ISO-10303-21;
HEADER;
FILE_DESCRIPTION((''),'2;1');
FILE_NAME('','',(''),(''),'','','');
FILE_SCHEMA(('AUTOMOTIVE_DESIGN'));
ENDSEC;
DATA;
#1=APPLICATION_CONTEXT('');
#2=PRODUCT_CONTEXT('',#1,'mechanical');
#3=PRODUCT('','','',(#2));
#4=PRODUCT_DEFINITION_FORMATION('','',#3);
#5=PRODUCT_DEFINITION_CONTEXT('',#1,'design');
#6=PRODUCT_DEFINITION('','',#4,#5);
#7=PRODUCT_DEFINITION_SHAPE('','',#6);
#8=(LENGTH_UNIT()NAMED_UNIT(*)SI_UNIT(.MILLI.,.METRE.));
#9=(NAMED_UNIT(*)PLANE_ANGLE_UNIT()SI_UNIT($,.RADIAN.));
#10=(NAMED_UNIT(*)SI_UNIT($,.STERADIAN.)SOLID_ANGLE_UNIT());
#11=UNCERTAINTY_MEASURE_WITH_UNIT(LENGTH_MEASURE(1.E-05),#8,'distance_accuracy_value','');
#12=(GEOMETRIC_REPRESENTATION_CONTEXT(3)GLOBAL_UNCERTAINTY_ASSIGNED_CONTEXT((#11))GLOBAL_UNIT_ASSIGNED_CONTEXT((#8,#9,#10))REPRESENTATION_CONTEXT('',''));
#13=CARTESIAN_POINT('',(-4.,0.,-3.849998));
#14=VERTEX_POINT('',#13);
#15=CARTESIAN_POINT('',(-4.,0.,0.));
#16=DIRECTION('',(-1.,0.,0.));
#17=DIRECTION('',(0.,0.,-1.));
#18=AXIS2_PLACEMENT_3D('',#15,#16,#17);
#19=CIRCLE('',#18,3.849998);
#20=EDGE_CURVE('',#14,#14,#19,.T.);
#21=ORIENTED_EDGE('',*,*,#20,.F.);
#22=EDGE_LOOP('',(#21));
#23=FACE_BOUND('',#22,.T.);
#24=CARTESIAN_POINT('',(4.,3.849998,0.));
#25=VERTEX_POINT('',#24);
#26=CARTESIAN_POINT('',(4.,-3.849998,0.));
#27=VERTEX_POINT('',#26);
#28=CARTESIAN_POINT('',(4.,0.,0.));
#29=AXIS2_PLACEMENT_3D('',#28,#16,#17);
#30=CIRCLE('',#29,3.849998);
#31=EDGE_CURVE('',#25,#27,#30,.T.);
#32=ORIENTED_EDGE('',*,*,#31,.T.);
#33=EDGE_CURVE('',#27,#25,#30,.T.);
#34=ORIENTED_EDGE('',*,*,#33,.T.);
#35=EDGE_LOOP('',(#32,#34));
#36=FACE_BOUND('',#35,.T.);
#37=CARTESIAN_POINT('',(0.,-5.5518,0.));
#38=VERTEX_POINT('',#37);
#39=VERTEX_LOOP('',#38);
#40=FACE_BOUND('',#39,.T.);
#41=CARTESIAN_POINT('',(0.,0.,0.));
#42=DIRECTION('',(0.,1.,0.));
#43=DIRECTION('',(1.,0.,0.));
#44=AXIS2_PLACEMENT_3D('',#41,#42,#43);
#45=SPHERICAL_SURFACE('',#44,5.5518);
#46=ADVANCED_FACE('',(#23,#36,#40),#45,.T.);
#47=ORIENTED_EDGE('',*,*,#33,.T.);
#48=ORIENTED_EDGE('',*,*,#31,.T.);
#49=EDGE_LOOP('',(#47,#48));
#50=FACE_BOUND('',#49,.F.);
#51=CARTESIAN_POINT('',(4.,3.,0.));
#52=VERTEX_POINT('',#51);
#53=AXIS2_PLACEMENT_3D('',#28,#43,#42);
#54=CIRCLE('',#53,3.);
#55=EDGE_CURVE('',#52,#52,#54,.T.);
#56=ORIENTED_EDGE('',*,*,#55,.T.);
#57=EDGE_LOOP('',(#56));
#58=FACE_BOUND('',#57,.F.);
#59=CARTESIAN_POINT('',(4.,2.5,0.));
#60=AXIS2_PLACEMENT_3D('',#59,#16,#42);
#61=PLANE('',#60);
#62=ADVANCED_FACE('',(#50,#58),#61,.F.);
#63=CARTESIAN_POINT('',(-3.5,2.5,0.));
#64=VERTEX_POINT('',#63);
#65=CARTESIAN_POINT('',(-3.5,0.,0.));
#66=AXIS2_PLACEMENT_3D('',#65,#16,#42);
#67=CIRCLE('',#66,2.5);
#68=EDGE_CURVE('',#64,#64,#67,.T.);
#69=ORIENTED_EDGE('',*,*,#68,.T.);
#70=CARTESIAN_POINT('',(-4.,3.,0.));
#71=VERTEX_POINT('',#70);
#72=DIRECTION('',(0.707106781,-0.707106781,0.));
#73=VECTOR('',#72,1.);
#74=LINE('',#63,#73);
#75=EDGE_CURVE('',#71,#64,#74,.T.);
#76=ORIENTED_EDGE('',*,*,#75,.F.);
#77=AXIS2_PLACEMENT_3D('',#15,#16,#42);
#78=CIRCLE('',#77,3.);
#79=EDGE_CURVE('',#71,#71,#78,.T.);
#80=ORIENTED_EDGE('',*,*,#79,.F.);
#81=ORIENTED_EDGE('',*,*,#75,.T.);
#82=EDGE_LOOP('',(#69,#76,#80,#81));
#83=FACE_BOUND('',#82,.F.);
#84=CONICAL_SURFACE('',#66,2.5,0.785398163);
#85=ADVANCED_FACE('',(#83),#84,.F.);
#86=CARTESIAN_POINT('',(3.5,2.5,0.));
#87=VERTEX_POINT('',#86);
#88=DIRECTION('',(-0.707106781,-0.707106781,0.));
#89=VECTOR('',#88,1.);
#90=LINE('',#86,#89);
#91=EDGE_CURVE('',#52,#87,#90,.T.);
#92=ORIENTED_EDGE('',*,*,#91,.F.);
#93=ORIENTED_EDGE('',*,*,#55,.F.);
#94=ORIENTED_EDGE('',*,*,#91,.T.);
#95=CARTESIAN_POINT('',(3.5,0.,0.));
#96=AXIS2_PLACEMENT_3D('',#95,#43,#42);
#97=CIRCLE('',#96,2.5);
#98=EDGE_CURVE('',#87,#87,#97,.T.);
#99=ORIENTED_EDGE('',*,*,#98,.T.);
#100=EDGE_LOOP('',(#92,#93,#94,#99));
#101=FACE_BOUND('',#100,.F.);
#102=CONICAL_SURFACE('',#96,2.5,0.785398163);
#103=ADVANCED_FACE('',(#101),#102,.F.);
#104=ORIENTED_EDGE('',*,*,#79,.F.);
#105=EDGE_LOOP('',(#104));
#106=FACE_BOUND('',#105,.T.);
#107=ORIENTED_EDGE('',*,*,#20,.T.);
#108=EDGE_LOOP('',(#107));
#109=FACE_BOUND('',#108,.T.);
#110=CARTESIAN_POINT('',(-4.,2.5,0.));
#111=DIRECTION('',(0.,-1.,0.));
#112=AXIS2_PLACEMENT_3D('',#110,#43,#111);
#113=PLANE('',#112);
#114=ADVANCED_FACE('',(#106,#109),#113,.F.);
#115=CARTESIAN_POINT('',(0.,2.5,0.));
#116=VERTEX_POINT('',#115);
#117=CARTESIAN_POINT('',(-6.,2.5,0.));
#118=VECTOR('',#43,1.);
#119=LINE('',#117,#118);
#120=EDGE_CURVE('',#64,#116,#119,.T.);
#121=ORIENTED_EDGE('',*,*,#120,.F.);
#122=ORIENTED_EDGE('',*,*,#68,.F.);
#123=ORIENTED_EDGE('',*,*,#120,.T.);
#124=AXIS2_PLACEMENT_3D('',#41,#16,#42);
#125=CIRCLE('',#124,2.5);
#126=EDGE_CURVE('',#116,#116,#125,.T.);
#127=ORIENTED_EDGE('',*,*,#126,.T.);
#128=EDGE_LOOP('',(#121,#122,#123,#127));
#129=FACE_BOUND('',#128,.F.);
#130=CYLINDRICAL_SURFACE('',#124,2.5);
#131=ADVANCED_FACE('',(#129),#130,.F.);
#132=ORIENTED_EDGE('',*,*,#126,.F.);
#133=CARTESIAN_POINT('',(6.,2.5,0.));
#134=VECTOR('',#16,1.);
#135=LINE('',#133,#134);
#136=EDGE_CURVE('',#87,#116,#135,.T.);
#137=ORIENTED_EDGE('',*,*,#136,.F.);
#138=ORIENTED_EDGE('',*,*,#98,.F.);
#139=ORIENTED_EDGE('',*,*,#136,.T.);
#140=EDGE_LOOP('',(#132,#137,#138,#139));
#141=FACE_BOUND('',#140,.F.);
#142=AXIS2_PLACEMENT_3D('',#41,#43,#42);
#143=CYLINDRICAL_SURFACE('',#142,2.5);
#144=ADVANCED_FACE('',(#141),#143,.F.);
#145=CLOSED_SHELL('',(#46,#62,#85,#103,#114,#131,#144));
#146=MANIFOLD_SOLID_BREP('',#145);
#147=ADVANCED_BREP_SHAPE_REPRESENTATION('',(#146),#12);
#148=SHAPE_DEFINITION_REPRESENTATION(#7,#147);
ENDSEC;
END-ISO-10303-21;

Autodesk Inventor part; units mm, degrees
ref_plane "YZ Plane" through (0, 0, 0) normal (1, 0, 0) x (0, 1, 0)
ref_plane "XZ Plane" through (0, 0, 0) normal (0, 1, 0) x (-1, 0, 0)
ref_plane "XY Plane" through (0, 0, 0) normal (0, 0, 1) x (1, 0, 0)
sketch "Sketch1" plane through (0, 0, 0) normal (0, 0, 1) x (1, 0, 0)
  line L0 (0, 3.85) -> (0, -3.85)
  line L1 (0, -3.85) -> (4, -3.85)
  line L2 (4, -3.85) -> (4, 3.85)
  line L3 (4, 3.85) -> (0, 3.85)
  arc A0 (0, -5.5518) -> (0, 5.5518) centre (0, 0) ccw
  line L4 (0, 5.5518) -> (0, -5.5518)
  line L5 (4, 5.5518) -> (6, 5.5518)
  line L6 (6, 5.5518) -> (6, -5.5518)
  line L7 (6, -5.5518) -> (4, -5.5518)
  line L8 (4, -5.5518) -> (4, 5.5518)
  line L9 (0, 2.5) -> (6, 2.5)
  line L10 (6, 2.5) -> (6, 0)
  line L11 (6, 0) -> (0, 0)
  line L12 (0, 0) -> (0, 2.5)
  dimension "d0" = 7.7
  dimension "d2" = 4
  dimension "d3" = 3.85
  dimension "d4" = 2
  dimension "d5" = 2
  dimension "d6" = 6
  dimension "d7" = 6
  dimension "d8" = 2.5
  dimension "d9" = 2.5
revolve "Revolution1" add sketch "Sketch1" angle 360 about axis through (0, 5.5518, 0) along (0, -1, 0) contours L3 L2 L9 L0 | L4 A0 L3 | L9 L2 L11 L0 | A0 L9 L2 | L11 L2 L1 L0 | L9 A0 L11 L2 | L1 A0 L4 | L11 A0 L2
extrude "Extrusion1" cut sketch "Sketch1" along normal mid plane 10 contours A0 L9 L2 | L8 L5 L6 L9 A0 | L9 A0 L11 L2 | L9 L6 L11 A0 | L11 A0 L2 | L11 L6 L7 L8 A0
mirror "Mirror1" about plane through (0, 0, 0) normal (1, 0, 0) of "Extrusion1"
revolve "Revolution2" cut sketch "Sketch1" angle 360 about axis through (6, 0, 0) along (-1, 0, 0) contours L9 L2 L11 L0 | L9 A0 L11 L2 | L9 L6 L11 A0
mirror "Mirror2" about plane through (0, 1.25, 0) normal (1, 0, 0) of "Revolution2"
chamfer "Chamfer1" distance 0.5 angle 45 2 edges at (-4, -2.5, 0) (4, -2.5, 0)
properties part number "KULA" material "Stainless Steel"
